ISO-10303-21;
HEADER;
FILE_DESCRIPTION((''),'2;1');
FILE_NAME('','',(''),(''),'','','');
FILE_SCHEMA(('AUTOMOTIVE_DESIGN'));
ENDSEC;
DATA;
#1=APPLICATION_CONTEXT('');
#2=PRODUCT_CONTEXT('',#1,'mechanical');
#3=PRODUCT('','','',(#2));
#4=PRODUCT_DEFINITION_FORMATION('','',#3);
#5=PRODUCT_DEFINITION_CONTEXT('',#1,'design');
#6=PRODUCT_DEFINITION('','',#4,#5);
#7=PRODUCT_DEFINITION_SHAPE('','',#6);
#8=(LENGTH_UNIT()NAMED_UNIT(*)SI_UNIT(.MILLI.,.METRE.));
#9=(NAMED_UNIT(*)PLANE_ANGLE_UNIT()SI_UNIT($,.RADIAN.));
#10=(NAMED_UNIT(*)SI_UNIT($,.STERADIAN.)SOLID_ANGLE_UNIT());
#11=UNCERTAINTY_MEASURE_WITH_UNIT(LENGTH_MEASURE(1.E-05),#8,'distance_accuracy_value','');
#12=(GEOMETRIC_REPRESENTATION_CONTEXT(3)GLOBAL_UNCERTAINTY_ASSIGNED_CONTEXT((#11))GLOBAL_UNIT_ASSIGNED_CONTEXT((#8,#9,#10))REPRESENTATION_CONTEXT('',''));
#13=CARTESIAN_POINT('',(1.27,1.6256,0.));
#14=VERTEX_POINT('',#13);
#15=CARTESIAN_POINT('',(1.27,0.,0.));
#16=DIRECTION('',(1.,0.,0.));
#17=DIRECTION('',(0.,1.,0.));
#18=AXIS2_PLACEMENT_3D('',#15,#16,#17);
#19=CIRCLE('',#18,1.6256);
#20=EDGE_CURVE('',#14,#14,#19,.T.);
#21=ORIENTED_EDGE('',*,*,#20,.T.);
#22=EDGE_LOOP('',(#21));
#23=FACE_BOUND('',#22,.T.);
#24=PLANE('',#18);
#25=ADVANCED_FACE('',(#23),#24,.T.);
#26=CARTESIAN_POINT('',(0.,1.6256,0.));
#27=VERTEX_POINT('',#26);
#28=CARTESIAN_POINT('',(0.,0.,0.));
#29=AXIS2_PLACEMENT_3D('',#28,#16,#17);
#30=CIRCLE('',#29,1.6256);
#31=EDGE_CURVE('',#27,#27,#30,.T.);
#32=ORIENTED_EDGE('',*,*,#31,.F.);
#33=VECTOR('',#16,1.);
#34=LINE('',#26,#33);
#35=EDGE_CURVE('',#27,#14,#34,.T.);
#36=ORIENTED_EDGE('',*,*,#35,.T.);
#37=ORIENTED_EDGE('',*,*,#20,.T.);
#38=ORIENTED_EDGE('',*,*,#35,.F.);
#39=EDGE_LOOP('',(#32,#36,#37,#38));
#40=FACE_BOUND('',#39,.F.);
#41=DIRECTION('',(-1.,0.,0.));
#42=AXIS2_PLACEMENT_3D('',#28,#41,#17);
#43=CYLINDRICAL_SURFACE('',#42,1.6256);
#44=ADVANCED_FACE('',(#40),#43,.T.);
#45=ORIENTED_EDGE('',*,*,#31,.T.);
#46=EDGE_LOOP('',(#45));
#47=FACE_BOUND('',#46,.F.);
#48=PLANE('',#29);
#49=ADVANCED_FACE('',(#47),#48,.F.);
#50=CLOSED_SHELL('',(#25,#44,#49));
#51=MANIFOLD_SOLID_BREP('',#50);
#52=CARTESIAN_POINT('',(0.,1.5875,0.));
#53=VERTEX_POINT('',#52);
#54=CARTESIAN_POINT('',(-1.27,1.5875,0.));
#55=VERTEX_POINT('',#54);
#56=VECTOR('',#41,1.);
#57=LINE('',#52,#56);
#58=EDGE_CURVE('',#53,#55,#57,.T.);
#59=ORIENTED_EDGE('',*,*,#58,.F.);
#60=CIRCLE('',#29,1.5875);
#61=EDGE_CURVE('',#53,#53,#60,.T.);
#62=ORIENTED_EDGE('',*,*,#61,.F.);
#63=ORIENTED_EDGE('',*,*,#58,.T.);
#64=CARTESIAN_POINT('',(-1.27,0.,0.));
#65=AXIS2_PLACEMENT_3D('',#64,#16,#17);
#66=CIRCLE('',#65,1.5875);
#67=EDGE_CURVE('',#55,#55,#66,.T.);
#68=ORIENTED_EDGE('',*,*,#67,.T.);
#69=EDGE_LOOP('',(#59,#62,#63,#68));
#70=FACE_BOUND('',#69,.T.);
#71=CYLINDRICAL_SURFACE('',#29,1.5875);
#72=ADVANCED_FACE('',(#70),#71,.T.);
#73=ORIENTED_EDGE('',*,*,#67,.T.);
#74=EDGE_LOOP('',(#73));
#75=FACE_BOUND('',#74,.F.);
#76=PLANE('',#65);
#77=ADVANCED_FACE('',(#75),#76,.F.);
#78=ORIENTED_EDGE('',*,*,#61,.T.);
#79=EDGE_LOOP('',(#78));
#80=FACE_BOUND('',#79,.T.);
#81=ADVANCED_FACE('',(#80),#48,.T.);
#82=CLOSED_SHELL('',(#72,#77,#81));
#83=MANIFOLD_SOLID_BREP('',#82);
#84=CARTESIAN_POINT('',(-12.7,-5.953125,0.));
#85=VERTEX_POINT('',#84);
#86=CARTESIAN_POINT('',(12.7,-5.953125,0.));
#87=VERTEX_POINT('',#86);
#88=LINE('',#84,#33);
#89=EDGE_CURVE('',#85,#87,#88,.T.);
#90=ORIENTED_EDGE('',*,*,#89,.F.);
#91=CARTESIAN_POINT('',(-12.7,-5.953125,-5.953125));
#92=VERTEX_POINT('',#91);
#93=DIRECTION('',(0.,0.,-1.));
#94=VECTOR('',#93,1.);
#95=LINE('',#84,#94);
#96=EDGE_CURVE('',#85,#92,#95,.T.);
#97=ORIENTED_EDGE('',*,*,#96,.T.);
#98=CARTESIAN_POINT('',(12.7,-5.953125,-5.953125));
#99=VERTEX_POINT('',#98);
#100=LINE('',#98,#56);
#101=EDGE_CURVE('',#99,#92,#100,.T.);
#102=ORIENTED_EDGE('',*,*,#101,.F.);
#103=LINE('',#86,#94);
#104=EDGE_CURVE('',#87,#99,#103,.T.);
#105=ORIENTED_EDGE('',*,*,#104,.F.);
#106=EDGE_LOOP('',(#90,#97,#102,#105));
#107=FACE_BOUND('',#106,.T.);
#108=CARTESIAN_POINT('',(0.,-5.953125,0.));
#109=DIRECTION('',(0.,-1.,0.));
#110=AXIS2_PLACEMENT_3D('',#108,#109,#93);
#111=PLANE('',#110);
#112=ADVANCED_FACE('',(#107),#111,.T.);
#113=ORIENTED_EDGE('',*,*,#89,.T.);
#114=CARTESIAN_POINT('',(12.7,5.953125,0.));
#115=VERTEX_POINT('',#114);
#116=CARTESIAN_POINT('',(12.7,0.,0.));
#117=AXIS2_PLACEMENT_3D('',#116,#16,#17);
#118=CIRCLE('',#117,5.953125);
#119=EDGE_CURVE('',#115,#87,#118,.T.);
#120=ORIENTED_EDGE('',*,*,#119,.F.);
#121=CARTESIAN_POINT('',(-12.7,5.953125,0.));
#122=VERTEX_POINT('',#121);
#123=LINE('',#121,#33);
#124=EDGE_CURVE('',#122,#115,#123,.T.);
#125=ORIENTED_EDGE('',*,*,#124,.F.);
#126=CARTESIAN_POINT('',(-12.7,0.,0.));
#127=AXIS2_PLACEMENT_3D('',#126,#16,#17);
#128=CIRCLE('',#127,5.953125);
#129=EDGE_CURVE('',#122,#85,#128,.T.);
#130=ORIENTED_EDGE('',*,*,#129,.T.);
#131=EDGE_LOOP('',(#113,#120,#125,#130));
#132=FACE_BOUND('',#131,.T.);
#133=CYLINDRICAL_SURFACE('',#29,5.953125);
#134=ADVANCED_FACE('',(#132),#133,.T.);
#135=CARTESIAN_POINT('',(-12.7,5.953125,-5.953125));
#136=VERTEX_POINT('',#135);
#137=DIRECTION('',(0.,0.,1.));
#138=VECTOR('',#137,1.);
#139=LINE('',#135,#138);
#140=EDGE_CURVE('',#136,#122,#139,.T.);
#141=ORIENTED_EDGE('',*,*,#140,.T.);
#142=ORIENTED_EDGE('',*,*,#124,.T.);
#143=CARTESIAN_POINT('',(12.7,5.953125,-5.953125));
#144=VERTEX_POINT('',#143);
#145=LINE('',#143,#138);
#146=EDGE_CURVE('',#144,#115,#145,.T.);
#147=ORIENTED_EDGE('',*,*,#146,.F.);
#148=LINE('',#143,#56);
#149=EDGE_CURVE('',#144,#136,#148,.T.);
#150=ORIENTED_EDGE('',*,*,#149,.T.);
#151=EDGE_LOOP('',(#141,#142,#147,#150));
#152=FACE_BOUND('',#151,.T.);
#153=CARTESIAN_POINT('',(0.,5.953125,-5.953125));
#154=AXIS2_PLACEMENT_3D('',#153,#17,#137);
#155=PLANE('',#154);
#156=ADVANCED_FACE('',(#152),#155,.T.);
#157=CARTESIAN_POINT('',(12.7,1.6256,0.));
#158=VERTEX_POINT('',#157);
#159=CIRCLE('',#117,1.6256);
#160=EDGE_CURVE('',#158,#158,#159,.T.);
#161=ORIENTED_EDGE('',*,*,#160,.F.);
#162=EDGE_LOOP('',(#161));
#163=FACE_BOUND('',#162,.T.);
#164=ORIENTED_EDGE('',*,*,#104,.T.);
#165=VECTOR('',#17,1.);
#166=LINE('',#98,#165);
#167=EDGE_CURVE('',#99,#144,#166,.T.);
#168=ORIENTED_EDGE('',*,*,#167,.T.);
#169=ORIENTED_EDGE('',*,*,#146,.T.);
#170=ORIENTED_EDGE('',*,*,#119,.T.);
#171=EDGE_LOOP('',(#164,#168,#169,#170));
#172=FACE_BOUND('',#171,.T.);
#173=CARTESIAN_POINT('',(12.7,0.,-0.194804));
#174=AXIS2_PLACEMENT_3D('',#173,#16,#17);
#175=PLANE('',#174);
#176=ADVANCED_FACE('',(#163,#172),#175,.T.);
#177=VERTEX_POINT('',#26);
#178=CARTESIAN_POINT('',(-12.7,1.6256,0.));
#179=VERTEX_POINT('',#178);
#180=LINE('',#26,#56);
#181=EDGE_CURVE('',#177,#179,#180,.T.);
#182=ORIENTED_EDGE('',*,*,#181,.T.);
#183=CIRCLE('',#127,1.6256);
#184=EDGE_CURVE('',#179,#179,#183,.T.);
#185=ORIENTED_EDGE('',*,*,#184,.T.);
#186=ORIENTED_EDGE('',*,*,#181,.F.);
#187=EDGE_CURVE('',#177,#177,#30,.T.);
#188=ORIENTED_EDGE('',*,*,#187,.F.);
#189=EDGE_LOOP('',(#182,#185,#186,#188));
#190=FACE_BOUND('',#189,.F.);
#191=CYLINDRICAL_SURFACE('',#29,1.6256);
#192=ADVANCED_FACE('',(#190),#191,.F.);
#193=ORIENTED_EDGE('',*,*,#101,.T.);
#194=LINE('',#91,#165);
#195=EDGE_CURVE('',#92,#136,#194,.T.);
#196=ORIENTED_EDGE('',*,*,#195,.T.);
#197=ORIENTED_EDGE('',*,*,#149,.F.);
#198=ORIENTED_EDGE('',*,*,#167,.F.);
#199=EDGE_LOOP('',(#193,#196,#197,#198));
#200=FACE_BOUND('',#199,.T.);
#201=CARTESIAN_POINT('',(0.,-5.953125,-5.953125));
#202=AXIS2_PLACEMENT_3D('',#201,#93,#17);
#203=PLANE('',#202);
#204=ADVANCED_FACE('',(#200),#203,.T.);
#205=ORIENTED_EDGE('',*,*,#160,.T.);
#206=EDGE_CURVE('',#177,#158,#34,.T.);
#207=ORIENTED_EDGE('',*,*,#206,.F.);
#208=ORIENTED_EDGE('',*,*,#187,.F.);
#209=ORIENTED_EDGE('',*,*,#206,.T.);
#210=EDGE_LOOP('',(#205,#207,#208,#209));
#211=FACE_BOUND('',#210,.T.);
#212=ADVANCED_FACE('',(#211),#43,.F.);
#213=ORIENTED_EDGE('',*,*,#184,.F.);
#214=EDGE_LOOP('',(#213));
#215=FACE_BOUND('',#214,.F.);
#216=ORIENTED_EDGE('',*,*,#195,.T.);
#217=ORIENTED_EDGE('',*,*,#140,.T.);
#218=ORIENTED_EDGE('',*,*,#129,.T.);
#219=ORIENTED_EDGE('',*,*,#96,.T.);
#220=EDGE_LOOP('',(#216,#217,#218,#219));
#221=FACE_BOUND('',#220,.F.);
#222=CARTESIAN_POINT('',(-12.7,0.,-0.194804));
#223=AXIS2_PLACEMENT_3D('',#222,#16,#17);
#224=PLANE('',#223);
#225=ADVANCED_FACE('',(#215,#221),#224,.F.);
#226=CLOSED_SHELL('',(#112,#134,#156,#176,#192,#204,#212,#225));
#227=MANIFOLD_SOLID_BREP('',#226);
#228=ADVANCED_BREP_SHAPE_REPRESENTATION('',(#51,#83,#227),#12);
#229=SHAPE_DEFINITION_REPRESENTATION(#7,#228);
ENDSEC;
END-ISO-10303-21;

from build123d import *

# Parameters (mm, degrees)
F0_R     = 1.6256
F1_DEPTH = 12.7
F3_DEPTH = 1.27
F2_R     = 1.5875
F4_DEPTH = 1.27
F5_DEPTH = 12.7


# Not quite as in the source:
# - a feature names something its author has since deleted; it is built from what else it names


with BuildPart() as f1:
    # F0 (on Right) → F1 (new body)
    with BuildSketch(Plane.YZ):
        with BuildLine():
            ThreePointArc((0, -5.953125), (4.2094950568, -4.2094950568), (5.953125, 0))
            ThreePointArc((5.953125, 0), (0, 5.953125), (-5.953125, 0))
            ThreePointArc((-5.953125, 0), (-4.2094950568, -4.2094950568), (0, -5.953125))
        make_face()
        Circle(F0_R, mode=Mode.SUBTRACT)
        with BuildLine():
            Line((5.953125, -5.953125), (5.953125, 0))
            ThreePointArc((5.953125, 0), (4.2094950568, -4.2094950568), (0, -5.953125))
            Line((0, -5.953125), (5.953125, -5.953125))
        make_face()
        with BuildLine():
            ThreePointArc((0, -5.953125), (-4.2094950568, -4.2094950568), (-5.953125, 0))
            Line((-5.953125, 0), (-5.953125, -5.953125))
            Line((-5.953125, -5.953125), (0, -5.953125))
        make_face()
    extrude(amount=F1_DEPTH)

    # F0 (on Right) → F5 (join)
    with BuildSketch(Plane.YZ):
        with BuildLine():
            ThreePointArc((0, -5.953125), (4.2094950568, -4.2094950568), (5.953125, 0))
            ThreePointArc((5.953125, 0), (0, 5.953125), (-5.953125, 0))
            ThreePointArc((-5.953125, 0), (-4.2094950568, -4.2094950568), (0, -5.953125))
        make_face()
        Circle(F0_R, mode=Mode.SUBTRACT)
        with BuildLine():
            Line((5.953125, -5.953125), (5.953125, 0))
            ThreePointArc((5.953125, 0), (4.2094950568, -4.2094950568), (0, -5.953125))
            Line((0, -5.953125), (5.953125, -5.953125))
        make_face()
        with BuildLine():
            ThreePointArc((0, -5.953125), (-4.2094950568, -4.2094950568), (-5.953125, 0))
            Line((-5.953125, 0), (-5.953125, -5.953125))
            Line((-5.953125, -5.953125), (0, -5.953125))
        make_face()
    extrude(amount=-F5_DEPTH)


with BuildPart() as f3:
    # F0 (on Right) → F3 (new body)
    with BuildSketch(Plane.YZ):
        Circle(F0_R)
    extrude(amount=F3_DEPTH)


with BuildPart() as f4:
    # F2 (on Right) → F4 (new body)
    with BuildSketch(Plane.YZ):
        Circle(F2_R)
    extrude(amount=-F4_DEPTH)


solid = Compound([f1.part, f3.part, f4.part])
